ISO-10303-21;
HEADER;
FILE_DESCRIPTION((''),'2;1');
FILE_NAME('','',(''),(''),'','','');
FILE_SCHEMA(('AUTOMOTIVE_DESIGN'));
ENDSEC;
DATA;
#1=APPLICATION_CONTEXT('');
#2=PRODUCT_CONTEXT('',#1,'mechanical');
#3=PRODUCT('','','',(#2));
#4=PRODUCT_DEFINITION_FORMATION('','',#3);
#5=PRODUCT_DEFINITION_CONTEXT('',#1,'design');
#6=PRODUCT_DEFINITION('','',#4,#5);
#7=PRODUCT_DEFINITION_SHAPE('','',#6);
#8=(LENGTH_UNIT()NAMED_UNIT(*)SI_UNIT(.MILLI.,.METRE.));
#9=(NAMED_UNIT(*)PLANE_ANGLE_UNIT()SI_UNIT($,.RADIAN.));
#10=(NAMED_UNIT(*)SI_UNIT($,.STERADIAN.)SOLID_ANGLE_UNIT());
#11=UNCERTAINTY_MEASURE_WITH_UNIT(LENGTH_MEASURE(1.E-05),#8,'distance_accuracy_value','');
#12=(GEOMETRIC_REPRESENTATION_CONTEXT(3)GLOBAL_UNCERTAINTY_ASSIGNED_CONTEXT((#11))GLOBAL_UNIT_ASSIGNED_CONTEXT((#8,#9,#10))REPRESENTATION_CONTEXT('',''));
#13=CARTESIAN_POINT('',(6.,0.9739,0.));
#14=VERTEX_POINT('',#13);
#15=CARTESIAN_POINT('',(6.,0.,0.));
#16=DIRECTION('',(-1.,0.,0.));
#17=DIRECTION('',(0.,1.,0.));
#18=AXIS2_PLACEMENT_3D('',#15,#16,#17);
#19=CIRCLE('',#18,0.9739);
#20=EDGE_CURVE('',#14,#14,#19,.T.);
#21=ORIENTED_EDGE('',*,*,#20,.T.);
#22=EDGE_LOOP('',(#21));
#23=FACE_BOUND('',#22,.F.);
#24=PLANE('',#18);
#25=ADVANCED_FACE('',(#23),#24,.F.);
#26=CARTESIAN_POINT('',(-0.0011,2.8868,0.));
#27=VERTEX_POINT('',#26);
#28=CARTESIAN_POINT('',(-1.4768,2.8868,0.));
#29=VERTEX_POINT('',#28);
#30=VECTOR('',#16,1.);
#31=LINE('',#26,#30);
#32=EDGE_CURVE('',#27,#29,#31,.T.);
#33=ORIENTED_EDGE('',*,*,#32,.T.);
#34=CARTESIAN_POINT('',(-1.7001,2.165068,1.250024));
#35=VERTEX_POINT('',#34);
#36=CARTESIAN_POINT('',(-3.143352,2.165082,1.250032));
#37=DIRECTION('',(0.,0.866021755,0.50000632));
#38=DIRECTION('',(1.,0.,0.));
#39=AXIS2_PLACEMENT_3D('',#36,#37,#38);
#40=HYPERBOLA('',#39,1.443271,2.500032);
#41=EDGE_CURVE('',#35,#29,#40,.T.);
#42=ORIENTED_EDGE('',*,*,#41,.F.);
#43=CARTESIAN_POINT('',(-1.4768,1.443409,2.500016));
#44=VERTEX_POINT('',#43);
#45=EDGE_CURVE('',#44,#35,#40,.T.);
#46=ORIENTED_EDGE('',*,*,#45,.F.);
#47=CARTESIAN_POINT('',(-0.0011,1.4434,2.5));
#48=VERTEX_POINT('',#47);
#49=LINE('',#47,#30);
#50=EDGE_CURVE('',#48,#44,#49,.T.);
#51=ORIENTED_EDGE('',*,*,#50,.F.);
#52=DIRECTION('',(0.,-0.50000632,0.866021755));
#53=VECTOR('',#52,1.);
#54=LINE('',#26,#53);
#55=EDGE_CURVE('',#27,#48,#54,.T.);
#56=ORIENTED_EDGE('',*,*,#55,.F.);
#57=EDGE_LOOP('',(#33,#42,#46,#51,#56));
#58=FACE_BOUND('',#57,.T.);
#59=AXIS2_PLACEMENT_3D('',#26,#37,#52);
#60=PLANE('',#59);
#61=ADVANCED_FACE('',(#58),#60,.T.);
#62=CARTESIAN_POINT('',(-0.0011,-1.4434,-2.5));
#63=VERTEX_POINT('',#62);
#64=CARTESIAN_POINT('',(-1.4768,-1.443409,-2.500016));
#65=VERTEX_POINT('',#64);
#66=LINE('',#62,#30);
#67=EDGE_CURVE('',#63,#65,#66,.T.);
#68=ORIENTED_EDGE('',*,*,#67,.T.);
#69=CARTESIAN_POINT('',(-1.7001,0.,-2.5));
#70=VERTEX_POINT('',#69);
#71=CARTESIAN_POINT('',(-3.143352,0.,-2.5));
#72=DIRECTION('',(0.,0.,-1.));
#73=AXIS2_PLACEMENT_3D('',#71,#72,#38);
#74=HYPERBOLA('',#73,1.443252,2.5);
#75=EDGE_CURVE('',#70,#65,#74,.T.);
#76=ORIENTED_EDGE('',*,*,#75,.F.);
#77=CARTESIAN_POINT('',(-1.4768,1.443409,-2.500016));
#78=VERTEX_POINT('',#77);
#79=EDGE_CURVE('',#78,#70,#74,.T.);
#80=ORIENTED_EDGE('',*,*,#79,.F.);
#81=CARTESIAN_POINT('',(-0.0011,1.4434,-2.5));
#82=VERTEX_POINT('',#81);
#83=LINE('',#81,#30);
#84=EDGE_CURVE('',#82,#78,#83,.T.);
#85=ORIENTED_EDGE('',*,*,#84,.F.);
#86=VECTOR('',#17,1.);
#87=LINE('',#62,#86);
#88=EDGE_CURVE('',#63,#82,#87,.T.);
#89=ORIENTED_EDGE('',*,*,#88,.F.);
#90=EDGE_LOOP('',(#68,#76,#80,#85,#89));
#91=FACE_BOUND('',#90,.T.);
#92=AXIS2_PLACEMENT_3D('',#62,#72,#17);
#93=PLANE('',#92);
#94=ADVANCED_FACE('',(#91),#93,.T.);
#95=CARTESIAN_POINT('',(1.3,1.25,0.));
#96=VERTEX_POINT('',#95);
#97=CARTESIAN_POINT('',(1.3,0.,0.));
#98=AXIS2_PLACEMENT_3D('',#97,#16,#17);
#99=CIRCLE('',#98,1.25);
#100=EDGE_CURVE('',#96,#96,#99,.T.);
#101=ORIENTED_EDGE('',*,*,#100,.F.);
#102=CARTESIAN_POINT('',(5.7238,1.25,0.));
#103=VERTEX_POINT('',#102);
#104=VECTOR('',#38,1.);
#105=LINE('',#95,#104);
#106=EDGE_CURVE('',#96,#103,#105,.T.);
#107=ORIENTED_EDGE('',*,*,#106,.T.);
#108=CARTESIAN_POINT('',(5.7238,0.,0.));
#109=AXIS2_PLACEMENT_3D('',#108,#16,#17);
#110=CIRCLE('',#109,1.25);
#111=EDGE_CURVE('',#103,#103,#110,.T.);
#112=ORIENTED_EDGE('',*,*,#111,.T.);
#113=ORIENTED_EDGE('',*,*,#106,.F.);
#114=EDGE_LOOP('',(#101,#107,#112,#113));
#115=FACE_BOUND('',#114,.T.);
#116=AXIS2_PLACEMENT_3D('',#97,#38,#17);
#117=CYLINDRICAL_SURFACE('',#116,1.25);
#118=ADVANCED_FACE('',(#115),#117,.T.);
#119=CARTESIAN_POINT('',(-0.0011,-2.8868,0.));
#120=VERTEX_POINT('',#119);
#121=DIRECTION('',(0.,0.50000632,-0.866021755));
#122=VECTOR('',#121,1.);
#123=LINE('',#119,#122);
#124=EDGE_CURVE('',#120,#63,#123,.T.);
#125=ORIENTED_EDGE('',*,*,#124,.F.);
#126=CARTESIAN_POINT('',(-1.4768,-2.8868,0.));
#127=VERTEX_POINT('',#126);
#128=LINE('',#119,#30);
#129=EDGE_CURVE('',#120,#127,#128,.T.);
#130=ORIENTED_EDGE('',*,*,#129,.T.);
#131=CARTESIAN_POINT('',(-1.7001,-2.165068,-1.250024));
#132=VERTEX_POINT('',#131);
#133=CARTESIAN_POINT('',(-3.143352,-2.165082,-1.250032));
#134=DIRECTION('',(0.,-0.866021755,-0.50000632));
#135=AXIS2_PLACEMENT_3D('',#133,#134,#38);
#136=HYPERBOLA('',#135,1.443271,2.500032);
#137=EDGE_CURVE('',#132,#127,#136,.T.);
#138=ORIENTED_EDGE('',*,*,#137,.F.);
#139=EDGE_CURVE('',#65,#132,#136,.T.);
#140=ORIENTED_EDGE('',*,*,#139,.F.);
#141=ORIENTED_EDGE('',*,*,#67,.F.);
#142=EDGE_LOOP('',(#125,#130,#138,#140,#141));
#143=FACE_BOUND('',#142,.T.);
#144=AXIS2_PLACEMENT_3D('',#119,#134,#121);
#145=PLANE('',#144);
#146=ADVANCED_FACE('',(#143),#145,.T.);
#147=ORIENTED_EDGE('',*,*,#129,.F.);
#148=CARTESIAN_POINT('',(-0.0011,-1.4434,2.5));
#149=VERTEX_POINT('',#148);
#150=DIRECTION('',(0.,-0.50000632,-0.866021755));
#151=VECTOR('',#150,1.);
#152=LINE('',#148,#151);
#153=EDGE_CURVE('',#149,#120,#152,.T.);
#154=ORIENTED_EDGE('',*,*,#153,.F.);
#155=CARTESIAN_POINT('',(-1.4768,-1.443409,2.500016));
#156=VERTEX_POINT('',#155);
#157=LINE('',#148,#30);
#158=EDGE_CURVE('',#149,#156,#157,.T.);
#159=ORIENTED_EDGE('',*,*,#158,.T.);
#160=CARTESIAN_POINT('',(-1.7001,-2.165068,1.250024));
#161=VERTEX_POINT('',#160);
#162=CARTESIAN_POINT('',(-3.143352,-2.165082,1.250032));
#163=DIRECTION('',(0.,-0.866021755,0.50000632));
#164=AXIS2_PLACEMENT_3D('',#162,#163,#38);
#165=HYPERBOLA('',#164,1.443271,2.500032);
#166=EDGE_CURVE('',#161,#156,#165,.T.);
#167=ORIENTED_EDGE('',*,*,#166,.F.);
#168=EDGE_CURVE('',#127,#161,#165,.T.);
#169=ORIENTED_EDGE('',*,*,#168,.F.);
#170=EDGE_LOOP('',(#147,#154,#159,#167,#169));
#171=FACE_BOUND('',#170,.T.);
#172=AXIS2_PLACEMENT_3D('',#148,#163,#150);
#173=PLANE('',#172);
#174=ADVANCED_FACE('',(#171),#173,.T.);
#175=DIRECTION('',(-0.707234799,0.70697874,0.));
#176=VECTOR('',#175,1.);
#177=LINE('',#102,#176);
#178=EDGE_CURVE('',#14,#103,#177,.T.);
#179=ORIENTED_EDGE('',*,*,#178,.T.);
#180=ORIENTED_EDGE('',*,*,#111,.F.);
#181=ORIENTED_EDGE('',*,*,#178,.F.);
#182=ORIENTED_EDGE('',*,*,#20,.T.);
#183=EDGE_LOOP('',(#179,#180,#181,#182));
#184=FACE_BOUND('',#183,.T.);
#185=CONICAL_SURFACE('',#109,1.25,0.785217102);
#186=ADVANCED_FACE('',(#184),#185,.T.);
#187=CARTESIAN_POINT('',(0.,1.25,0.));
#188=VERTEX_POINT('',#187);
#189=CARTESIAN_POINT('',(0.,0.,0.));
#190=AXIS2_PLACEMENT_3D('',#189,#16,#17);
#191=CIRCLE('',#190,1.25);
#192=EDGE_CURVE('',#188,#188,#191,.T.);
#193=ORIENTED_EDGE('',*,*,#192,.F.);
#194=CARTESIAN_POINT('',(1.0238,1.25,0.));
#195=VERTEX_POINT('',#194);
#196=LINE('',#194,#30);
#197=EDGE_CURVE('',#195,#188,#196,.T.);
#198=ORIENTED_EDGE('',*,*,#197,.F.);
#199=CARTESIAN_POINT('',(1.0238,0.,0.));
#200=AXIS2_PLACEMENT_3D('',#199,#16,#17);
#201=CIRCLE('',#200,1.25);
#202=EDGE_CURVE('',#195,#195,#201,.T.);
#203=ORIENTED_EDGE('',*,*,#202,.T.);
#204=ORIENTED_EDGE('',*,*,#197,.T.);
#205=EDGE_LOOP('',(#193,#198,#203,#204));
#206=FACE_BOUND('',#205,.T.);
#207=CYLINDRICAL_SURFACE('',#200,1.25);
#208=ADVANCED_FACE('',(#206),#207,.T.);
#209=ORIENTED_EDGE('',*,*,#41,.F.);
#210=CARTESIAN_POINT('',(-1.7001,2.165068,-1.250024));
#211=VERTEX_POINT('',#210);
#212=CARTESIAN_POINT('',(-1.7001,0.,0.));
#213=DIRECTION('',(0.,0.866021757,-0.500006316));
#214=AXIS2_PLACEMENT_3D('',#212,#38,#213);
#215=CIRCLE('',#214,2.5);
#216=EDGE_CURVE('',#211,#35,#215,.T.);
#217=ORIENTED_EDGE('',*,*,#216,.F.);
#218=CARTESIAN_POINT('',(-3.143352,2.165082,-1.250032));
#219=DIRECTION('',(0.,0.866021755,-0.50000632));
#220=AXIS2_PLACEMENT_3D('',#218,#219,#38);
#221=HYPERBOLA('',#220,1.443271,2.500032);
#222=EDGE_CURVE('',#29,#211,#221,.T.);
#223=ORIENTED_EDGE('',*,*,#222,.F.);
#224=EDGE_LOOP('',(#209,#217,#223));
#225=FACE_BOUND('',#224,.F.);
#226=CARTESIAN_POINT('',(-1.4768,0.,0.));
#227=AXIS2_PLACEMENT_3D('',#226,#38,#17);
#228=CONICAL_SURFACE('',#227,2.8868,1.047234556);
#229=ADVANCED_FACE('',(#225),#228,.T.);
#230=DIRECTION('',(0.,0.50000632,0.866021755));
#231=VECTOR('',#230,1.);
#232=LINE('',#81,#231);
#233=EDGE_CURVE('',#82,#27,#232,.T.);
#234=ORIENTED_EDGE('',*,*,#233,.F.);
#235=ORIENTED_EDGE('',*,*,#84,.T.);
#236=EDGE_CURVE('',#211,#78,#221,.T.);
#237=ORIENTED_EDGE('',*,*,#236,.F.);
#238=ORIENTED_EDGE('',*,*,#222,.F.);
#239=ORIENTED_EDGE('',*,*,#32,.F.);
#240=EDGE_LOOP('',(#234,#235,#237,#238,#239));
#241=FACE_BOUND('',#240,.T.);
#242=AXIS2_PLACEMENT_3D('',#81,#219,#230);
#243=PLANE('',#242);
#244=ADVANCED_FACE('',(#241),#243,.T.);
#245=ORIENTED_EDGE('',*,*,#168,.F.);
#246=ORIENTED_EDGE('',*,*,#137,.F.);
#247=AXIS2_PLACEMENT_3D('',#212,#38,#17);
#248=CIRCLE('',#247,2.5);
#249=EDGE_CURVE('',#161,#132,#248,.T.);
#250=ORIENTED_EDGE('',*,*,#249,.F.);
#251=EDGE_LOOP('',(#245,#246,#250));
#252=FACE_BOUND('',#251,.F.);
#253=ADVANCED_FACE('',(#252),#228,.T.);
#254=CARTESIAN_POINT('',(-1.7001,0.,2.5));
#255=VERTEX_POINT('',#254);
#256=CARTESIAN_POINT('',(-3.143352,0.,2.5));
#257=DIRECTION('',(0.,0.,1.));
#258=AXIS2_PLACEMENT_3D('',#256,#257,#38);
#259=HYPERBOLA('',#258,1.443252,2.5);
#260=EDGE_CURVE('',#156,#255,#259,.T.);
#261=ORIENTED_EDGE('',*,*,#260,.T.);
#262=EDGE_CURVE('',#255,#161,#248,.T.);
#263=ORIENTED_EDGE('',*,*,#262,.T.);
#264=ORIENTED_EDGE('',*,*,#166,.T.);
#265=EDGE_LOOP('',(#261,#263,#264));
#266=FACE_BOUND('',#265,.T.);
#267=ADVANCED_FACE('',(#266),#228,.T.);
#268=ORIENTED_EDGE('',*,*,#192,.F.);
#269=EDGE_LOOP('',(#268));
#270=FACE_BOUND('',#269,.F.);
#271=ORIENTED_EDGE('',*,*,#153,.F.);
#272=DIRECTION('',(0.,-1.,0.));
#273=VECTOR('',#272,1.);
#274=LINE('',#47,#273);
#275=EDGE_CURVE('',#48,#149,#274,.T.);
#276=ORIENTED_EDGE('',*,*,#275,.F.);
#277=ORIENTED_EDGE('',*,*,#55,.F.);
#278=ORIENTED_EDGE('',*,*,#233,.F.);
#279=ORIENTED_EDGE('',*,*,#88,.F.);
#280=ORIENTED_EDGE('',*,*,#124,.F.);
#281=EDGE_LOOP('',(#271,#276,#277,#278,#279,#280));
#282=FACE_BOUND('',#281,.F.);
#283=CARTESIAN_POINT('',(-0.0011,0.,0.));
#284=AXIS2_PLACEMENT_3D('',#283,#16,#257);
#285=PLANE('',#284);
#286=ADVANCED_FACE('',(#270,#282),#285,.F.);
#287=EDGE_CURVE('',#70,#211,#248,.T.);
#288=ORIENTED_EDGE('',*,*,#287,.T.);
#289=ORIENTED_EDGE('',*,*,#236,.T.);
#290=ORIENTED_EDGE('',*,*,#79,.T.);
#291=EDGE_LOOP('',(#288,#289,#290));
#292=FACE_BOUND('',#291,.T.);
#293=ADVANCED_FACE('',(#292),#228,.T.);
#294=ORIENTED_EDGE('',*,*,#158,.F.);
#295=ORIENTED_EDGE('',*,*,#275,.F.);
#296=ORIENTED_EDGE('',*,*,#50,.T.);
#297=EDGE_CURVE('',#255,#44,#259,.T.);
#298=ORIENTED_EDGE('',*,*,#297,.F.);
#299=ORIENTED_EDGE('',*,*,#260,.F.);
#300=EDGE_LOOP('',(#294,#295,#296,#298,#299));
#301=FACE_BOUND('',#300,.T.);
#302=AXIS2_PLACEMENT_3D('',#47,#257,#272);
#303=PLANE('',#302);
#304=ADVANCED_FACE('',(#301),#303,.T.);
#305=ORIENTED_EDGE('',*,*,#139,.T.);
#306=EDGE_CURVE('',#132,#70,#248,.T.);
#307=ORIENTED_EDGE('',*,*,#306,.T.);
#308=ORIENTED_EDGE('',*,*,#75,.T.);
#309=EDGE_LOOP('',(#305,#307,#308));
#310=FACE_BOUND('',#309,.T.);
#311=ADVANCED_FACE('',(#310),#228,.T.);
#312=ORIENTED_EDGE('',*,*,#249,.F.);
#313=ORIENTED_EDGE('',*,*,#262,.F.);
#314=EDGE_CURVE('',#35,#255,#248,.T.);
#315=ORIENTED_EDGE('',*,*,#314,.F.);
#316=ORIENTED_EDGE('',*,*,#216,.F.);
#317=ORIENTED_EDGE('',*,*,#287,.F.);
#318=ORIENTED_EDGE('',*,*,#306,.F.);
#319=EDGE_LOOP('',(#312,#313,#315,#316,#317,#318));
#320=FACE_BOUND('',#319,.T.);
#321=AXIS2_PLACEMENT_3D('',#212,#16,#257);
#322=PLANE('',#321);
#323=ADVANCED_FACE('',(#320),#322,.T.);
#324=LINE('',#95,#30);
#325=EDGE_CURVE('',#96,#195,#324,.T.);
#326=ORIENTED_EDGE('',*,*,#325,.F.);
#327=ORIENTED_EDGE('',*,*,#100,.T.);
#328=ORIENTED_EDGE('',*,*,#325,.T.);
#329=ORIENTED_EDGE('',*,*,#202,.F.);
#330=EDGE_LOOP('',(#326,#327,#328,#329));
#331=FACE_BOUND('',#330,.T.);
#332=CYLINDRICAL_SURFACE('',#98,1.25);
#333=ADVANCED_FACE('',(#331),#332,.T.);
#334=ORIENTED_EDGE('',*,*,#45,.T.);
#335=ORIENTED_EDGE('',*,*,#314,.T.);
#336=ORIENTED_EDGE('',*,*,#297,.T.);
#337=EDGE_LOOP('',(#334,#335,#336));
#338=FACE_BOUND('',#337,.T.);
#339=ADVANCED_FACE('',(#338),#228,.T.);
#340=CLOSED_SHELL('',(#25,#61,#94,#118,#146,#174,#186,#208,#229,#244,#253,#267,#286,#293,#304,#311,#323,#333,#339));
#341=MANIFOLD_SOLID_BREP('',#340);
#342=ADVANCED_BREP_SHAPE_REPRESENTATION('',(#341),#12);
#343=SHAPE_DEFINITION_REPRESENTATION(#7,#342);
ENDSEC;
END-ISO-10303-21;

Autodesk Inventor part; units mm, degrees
ref_plane "YZ Plane" through (0, 0, 0) normal (1, 0, 0) x (0, 1, 0)
ref_plane "XZ Plane" through (0, 0, 0) normal (0, 1, 0) x (-1, 0, 0)
sketch "Sketch1" plane through (0, 0, 0) normal (0, 0, 1) x (1, 0, 0)
  line L0 (0, 2.5) -> (0, 1.25)
  line L1 (1.3, 1.25) -> (6, 1.25)
  line L2 (6, 1.25) -> (6, 0)
  line L3 (6, 0) -> (-0.0011, 0)
  line L4 (-1.2013, 0) -> (7.2002, 0) projected
  line L5 (-0.0011, 0) -> (-0.0011, 2.5)
  line L6 (-0.0011, 2.5) -> (0, 2.5)
  line L7 (1.3, 1.25) -> (1.0238, 1.25)
  line L8 (1.0238, 1.25) -> (0, 1.25)
  line L9 (0, -0.5) -> (0, 3) projected
  dimension "d0" = 6
  dimension "d1" = 4.7
  dimension "d2" = 2.5
  dimension "d9" = 0.0011
  dimension "d10" = 5
  dimension "d13" = 0.2762
  dimension "d14" = 2.5
revolve "Body" add sketch "Sketch1" angle 360 about axis through (6, 0, 0) along (-1, 0, 0)
sketch "Sketch2" plane through (-0.0011, 0, 0) normal (-1, 0, 0) x (0, 0, 1)
  line L0 (0, 2.8868) -> (2.5, 1.4434)
  line L1 (2.5, 1.4434) -> (2.5, -1.4434)
  line L2 (2.5, -1.4434) -> (0, -2.8868)
  line L3 (0, -2.8868) -> (-2.5, -1.4434)
  line L4 (-2.5, -1.4434) -> (-2.5, 1.4434)
  line L5 (-2.5, 1.4434) -> (0, 2.8868)
  point P0 (0, 0)
  point P1 (0, 0)
  dimension "d11" = 5
extrude "Head" add sketch "Sketch2" along normal blind 1.699
sketch "Sketch4" plane through (0, 0, 0) normal (0, 0, 1) x (1, 0, 0)
  line L0 (-1.7001, 2.5) -> (-1.7001, 2.8868)
  line L1 (-1.7001, 2.8868) -> (-1.4768, 2.8868)
  line L2 (-1.4768, 2.8868) -> (-1.7001, 2.5)
  line L3 (-2.0399, 0) -> (0.3387, 0) projected
  line L4 (-0.0011, 2.8868) -> (-1.7001, 2.8868) projected
  line L5 (-1.7001, 1.4434) -> (-1.7001, 2.8868) projected
  dimension "d5" = 30
  dimension "d19" = 5
revolve "Chamfer1" cut sketch "Sketch4" angle 360 about axis through (-10, 0, 0) along (1, 0, 0)
thread "Thread" size "M2.5x0.45" class "6g" standard "ISO Metric profile" length 4.7
chamfer "Chamfer2" distance 0.2761 distance2 0.2762 1 edges at (6, -1.25, 0) measured on face at (6, -0.3871, 0.3429)
ref_plane "Work Plane1" through (1.525, 0, 0) normal (0, 0, 1) x (1, 0, 0)
equation "\"d0\" = NLG"
equation "\"d1\" = GEL"
equation "\"d2\" = GD"
equation "\"d10\" = SD2"
equation "\"d14\" = BDM"
equation "\"d11\" = SW"
equation "\"d3\" = KOH - SD"
equation "\"d5\" = ANG1"
equation "\"d19\" = SW0"
equation "\"d15\" = GEL"
equation "\"d6\" = -0.5 * SPD + 0.5 * GD"
equation "\"NLG\" = 6"
equation "\"GD\" = NND"
equation "\"BDM\" = NND"
equation "\"KOH\" = 1.7"
equation "\"GEL\" = 4.7"
equation "\"SW\" = 5"
equation "\"SW0\" = SW"
equation "\"SPD\" = NND - 1.2269 * PTC"
equation "\"SD2\" = SW"
equation "\"SD\" = 0.001"
equation "\"ANG1\" = 30deg"
equation "\"GAL\" = 0.61345 * PTC"
equation "\"GUL\" = 0.61345 * PTC"
equation "\"RR\" = 0.001"
equation "\"WFT\" = SD"
equation "\"GD1\" = THREADDIA - 1.2269 * PTC"
equation "\"THREADDIA\" = 2.5"
equation "\"SDH\" = SW"
equation "\"TOA\" = 30deg"
equation "\"FAWI\" = 45deg"
equation "\"PTC\" = 0.45"
equation "\"NND\" = 2.5"
equation "\"E0\" = 1.155 * SW"
properties part number "AS 1110 - M2,5 x 6" material "Steel, Mild"
